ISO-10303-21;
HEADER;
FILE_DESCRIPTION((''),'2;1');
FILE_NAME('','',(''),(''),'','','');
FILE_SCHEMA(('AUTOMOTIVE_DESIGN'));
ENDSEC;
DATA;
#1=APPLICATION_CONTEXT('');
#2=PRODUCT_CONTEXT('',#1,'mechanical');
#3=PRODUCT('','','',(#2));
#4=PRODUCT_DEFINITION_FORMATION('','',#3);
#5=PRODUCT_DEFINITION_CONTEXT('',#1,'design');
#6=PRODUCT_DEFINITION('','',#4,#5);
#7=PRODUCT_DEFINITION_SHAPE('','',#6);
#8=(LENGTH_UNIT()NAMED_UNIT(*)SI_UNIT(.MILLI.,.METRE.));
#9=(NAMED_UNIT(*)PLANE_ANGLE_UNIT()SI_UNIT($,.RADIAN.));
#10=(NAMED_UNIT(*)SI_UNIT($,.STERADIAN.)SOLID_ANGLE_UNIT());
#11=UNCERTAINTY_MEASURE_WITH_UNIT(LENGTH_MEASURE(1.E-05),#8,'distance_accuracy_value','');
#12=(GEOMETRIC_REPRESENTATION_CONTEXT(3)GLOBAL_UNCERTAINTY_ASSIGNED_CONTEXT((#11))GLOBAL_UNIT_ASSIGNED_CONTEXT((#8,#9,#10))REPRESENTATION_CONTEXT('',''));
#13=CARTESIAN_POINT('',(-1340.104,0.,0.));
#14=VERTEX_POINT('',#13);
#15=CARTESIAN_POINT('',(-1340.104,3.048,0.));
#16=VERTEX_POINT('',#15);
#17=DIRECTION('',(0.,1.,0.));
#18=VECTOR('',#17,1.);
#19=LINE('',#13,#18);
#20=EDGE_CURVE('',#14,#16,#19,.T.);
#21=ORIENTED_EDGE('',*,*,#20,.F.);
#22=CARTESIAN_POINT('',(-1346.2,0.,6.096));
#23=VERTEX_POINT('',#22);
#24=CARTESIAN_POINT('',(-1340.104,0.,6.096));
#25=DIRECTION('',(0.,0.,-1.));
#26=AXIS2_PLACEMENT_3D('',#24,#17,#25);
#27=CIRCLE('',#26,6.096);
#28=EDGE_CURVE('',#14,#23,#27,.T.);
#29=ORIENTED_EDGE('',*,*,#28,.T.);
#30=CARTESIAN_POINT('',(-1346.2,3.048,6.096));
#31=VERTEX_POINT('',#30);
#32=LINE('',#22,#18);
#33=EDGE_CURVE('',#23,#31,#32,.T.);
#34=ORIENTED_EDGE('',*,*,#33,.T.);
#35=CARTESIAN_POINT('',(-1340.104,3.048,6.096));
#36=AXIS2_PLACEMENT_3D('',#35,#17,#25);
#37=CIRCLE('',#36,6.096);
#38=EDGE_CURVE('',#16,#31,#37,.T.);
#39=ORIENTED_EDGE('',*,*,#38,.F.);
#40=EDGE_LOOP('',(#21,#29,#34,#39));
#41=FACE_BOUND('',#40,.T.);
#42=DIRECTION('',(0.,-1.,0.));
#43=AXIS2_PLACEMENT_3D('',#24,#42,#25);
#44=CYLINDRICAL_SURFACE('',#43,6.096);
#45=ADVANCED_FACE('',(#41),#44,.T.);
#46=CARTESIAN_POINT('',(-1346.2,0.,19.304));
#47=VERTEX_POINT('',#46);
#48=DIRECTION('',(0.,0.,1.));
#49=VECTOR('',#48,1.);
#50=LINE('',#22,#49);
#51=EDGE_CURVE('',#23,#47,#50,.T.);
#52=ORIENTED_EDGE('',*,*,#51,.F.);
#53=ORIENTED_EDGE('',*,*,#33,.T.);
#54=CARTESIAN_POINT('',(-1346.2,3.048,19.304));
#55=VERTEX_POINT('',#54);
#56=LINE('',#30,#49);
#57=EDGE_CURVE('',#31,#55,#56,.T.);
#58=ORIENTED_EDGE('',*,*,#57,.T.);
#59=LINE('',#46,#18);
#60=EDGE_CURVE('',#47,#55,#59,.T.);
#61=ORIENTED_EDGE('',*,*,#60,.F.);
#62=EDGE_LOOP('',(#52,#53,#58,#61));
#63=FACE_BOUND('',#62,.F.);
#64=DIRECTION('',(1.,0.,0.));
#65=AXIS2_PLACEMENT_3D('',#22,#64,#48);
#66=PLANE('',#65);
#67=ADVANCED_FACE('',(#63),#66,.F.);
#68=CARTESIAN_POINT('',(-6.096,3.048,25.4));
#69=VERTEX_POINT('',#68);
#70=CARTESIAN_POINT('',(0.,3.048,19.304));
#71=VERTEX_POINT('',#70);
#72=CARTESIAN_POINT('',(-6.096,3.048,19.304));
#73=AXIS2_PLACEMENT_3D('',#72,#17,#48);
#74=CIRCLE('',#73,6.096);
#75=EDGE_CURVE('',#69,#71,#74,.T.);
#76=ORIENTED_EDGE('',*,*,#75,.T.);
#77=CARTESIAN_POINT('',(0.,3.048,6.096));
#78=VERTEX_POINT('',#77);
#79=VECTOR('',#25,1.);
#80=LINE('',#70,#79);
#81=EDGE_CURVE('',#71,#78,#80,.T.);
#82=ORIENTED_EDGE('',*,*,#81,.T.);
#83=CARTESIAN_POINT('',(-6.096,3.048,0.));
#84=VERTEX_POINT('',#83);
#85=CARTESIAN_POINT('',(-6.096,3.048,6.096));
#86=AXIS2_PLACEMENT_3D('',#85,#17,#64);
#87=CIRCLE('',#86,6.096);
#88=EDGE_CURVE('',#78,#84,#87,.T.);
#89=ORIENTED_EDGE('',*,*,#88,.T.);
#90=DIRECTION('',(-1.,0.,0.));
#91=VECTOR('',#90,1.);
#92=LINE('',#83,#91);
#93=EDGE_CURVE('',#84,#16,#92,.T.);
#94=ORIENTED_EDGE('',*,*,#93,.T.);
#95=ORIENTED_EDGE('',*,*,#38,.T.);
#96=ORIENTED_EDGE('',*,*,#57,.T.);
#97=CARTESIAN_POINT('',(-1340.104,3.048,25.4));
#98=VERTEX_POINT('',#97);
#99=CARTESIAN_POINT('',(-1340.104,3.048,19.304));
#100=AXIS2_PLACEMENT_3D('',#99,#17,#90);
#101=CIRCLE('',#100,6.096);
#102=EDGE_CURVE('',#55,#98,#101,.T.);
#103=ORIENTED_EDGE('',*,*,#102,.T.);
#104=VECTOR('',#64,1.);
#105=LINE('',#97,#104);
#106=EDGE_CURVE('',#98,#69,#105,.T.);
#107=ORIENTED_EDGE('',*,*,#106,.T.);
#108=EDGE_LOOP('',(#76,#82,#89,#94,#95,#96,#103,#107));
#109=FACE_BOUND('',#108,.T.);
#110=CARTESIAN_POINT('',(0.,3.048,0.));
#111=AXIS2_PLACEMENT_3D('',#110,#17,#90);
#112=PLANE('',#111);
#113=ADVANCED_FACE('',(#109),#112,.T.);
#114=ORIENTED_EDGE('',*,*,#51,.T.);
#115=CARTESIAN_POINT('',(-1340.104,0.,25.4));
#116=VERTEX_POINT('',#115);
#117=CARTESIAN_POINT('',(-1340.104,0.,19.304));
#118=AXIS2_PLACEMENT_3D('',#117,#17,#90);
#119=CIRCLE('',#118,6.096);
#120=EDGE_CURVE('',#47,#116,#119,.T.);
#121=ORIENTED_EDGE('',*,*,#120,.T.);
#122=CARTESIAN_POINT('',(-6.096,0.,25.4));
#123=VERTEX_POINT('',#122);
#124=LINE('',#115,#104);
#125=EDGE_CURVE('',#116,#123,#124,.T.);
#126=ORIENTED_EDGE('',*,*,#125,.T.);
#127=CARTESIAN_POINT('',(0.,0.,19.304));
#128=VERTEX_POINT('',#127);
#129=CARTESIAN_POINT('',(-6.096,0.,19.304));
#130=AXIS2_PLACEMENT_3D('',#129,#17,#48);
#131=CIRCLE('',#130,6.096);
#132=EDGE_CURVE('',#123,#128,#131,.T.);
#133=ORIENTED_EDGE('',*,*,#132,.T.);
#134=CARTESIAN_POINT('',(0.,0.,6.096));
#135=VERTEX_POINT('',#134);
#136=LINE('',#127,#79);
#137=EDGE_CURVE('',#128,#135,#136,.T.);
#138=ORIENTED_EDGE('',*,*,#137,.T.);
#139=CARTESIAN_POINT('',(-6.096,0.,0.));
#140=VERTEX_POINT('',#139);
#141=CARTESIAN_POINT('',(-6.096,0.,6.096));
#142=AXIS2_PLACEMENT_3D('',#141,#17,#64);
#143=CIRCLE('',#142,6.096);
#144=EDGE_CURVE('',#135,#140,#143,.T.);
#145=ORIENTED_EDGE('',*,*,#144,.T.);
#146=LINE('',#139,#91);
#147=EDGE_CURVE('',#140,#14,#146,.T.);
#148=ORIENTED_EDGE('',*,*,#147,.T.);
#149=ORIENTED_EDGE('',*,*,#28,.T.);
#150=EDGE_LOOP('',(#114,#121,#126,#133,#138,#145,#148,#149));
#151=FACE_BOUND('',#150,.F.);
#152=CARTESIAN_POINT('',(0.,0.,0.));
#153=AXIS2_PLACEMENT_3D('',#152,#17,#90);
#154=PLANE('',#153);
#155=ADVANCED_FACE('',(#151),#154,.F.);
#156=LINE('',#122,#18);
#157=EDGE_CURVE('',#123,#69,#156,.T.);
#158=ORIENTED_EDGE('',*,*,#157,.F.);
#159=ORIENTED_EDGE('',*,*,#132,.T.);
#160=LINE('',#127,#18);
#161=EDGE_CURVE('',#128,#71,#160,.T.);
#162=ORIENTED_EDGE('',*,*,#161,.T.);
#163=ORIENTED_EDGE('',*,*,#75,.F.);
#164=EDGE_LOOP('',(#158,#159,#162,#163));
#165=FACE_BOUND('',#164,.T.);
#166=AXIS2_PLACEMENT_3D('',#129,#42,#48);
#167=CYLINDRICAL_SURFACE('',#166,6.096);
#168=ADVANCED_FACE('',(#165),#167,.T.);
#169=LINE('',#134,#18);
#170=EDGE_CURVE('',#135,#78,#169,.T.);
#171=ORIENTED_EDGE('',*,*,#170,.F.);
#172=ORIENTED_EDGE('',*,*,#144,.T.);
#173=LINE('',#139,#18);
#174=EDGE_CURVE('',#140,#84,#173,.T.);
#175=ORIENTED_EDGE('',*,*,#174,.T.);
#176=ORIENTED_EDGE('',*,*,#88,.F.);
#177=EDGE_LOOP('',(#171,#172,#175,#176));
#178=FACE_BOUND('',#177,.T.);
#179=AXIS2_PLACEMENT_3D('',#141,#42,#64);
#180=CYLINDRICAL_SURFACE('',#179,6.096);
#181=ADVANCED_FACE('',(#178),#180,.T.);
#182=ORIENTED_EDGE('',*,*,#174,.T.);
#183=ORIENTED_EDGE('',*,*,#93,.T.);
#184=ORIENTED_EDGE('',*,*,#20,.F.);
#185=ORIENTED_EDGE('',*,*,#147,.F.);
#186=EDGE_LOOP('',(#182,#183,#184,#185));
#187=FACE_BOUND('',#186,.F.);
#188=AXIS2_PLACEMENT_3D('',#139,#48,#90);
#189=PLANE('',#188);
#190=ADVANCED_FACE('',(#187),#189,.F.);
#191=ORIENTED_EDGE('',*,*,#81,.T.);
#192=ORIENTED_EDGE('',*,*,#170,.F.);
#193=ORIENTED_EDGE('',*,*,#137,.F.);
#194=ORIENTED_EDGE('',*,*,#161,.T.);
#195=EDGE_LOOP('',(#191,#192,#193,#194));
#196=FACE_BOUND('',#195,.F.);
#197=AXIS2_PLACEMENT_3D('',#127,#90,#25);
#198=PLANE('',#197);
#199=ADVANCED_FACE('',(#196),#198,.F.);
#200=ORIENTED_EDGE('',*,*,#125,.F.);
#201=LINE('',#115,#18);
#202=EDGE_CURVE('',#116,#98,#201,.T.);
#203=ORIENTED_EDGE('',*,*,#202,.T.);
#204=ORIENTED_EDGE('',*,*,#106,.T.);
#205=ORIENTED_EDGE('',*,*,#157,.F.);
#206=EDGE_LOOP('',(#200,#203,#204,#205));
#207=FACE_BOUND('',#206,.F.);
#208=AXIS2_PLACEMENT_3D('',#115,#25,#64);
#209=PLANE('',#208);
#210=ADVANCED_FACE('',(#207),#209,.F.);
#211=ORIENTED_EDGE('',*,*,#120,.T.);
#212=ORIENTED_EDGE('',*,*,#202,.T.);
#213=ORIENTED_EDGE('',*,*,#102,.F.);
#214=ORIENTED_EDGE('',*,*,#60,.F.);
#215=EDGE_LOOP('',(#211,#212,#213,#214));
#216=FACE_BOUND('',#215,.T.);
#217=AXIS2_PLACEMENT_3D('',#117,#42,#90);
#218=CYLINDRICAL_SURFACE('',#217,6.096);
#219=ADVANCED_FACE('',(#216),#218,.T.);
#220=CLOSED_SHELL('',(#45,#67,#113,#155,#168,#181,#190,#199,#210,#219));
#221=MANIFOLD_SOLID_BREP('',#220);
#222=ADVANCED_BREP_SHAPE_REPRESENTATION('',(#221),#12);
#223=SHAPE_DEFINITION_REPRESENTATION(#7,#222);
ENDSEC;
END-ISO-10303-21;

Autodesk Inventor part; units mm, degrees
ref_plane "YZ Plane" through (0, 0, 0) normal (1, 0, 0) x (0, 1, 0)
ref_plane "XZ Plane" through (0, 0, 0) normal (0, 1, 0) x (-1, 0, 0)
ref_plane "XY Plane" through (0, 0, 0) normal (0, 0, 1) x (1, 0, 0)
sketch "Sketch1" plane through (0, 0, 0) normal (0, 1, 0) x (-1, 0, 0)
  line L0 (6.096, 0) -> (1340.104, 0)
  line L1 (1346.2, 6.096) -> (1346.2, 19.304)
  line L2 (1340.104, 25.4) -> (6.096, 25.4)
  line L3 (0, 19.304) -> (0, 6.096)
  arc A0 (6.096, 25.4) -> (0, 19.304) centre (6.096, 19.304) ccw
  arc A1 (0, 6.096) -> (6.096, 0) centre (6.096, 6.096) ccw
  arc A2 (1340.104, 0) -> (1346.2, 6.096) centre (1340.104, 6.096) ccw
  arc A3 (1346.2, 19.304) -> (1340.104, 25.4) centre (1340.104, 19.304) ccw
  point P0 (0, 0)
  point P1 (1346.2, 25.4)
  point P2 (1346.2, 0)
  point P3 (0, 25.4)
  dimension "d0" = 1346.2
  dimension "d1" = 25.4
  dimension "d2" = 6.096
extrude "Plate1" add sketch "Sketch1" along normal blind 3.048
equation "\"BendRadius\" = Thickness"
equation "\"BendReliefWidth\" = Thickness"
equation "\"BendReliefDepth\" = 0.5 * Thickness"
equation "\"CornerReliefSize\" = 4 * Thickness"
equation "\"MinimumRemnant\" = 2 * Thickness"
equation "\"TransitionRadius\" = BendRadius"
equation "\"JacobiRadiusSize\" = BendRadius"
equation "\"GapSize\" = Thickness"
equation "\"d3\" = BendRadius"
equation "\"Thickness\" = 3.048"
properties part number "bottom" material "Polycarbonate, Clear"
